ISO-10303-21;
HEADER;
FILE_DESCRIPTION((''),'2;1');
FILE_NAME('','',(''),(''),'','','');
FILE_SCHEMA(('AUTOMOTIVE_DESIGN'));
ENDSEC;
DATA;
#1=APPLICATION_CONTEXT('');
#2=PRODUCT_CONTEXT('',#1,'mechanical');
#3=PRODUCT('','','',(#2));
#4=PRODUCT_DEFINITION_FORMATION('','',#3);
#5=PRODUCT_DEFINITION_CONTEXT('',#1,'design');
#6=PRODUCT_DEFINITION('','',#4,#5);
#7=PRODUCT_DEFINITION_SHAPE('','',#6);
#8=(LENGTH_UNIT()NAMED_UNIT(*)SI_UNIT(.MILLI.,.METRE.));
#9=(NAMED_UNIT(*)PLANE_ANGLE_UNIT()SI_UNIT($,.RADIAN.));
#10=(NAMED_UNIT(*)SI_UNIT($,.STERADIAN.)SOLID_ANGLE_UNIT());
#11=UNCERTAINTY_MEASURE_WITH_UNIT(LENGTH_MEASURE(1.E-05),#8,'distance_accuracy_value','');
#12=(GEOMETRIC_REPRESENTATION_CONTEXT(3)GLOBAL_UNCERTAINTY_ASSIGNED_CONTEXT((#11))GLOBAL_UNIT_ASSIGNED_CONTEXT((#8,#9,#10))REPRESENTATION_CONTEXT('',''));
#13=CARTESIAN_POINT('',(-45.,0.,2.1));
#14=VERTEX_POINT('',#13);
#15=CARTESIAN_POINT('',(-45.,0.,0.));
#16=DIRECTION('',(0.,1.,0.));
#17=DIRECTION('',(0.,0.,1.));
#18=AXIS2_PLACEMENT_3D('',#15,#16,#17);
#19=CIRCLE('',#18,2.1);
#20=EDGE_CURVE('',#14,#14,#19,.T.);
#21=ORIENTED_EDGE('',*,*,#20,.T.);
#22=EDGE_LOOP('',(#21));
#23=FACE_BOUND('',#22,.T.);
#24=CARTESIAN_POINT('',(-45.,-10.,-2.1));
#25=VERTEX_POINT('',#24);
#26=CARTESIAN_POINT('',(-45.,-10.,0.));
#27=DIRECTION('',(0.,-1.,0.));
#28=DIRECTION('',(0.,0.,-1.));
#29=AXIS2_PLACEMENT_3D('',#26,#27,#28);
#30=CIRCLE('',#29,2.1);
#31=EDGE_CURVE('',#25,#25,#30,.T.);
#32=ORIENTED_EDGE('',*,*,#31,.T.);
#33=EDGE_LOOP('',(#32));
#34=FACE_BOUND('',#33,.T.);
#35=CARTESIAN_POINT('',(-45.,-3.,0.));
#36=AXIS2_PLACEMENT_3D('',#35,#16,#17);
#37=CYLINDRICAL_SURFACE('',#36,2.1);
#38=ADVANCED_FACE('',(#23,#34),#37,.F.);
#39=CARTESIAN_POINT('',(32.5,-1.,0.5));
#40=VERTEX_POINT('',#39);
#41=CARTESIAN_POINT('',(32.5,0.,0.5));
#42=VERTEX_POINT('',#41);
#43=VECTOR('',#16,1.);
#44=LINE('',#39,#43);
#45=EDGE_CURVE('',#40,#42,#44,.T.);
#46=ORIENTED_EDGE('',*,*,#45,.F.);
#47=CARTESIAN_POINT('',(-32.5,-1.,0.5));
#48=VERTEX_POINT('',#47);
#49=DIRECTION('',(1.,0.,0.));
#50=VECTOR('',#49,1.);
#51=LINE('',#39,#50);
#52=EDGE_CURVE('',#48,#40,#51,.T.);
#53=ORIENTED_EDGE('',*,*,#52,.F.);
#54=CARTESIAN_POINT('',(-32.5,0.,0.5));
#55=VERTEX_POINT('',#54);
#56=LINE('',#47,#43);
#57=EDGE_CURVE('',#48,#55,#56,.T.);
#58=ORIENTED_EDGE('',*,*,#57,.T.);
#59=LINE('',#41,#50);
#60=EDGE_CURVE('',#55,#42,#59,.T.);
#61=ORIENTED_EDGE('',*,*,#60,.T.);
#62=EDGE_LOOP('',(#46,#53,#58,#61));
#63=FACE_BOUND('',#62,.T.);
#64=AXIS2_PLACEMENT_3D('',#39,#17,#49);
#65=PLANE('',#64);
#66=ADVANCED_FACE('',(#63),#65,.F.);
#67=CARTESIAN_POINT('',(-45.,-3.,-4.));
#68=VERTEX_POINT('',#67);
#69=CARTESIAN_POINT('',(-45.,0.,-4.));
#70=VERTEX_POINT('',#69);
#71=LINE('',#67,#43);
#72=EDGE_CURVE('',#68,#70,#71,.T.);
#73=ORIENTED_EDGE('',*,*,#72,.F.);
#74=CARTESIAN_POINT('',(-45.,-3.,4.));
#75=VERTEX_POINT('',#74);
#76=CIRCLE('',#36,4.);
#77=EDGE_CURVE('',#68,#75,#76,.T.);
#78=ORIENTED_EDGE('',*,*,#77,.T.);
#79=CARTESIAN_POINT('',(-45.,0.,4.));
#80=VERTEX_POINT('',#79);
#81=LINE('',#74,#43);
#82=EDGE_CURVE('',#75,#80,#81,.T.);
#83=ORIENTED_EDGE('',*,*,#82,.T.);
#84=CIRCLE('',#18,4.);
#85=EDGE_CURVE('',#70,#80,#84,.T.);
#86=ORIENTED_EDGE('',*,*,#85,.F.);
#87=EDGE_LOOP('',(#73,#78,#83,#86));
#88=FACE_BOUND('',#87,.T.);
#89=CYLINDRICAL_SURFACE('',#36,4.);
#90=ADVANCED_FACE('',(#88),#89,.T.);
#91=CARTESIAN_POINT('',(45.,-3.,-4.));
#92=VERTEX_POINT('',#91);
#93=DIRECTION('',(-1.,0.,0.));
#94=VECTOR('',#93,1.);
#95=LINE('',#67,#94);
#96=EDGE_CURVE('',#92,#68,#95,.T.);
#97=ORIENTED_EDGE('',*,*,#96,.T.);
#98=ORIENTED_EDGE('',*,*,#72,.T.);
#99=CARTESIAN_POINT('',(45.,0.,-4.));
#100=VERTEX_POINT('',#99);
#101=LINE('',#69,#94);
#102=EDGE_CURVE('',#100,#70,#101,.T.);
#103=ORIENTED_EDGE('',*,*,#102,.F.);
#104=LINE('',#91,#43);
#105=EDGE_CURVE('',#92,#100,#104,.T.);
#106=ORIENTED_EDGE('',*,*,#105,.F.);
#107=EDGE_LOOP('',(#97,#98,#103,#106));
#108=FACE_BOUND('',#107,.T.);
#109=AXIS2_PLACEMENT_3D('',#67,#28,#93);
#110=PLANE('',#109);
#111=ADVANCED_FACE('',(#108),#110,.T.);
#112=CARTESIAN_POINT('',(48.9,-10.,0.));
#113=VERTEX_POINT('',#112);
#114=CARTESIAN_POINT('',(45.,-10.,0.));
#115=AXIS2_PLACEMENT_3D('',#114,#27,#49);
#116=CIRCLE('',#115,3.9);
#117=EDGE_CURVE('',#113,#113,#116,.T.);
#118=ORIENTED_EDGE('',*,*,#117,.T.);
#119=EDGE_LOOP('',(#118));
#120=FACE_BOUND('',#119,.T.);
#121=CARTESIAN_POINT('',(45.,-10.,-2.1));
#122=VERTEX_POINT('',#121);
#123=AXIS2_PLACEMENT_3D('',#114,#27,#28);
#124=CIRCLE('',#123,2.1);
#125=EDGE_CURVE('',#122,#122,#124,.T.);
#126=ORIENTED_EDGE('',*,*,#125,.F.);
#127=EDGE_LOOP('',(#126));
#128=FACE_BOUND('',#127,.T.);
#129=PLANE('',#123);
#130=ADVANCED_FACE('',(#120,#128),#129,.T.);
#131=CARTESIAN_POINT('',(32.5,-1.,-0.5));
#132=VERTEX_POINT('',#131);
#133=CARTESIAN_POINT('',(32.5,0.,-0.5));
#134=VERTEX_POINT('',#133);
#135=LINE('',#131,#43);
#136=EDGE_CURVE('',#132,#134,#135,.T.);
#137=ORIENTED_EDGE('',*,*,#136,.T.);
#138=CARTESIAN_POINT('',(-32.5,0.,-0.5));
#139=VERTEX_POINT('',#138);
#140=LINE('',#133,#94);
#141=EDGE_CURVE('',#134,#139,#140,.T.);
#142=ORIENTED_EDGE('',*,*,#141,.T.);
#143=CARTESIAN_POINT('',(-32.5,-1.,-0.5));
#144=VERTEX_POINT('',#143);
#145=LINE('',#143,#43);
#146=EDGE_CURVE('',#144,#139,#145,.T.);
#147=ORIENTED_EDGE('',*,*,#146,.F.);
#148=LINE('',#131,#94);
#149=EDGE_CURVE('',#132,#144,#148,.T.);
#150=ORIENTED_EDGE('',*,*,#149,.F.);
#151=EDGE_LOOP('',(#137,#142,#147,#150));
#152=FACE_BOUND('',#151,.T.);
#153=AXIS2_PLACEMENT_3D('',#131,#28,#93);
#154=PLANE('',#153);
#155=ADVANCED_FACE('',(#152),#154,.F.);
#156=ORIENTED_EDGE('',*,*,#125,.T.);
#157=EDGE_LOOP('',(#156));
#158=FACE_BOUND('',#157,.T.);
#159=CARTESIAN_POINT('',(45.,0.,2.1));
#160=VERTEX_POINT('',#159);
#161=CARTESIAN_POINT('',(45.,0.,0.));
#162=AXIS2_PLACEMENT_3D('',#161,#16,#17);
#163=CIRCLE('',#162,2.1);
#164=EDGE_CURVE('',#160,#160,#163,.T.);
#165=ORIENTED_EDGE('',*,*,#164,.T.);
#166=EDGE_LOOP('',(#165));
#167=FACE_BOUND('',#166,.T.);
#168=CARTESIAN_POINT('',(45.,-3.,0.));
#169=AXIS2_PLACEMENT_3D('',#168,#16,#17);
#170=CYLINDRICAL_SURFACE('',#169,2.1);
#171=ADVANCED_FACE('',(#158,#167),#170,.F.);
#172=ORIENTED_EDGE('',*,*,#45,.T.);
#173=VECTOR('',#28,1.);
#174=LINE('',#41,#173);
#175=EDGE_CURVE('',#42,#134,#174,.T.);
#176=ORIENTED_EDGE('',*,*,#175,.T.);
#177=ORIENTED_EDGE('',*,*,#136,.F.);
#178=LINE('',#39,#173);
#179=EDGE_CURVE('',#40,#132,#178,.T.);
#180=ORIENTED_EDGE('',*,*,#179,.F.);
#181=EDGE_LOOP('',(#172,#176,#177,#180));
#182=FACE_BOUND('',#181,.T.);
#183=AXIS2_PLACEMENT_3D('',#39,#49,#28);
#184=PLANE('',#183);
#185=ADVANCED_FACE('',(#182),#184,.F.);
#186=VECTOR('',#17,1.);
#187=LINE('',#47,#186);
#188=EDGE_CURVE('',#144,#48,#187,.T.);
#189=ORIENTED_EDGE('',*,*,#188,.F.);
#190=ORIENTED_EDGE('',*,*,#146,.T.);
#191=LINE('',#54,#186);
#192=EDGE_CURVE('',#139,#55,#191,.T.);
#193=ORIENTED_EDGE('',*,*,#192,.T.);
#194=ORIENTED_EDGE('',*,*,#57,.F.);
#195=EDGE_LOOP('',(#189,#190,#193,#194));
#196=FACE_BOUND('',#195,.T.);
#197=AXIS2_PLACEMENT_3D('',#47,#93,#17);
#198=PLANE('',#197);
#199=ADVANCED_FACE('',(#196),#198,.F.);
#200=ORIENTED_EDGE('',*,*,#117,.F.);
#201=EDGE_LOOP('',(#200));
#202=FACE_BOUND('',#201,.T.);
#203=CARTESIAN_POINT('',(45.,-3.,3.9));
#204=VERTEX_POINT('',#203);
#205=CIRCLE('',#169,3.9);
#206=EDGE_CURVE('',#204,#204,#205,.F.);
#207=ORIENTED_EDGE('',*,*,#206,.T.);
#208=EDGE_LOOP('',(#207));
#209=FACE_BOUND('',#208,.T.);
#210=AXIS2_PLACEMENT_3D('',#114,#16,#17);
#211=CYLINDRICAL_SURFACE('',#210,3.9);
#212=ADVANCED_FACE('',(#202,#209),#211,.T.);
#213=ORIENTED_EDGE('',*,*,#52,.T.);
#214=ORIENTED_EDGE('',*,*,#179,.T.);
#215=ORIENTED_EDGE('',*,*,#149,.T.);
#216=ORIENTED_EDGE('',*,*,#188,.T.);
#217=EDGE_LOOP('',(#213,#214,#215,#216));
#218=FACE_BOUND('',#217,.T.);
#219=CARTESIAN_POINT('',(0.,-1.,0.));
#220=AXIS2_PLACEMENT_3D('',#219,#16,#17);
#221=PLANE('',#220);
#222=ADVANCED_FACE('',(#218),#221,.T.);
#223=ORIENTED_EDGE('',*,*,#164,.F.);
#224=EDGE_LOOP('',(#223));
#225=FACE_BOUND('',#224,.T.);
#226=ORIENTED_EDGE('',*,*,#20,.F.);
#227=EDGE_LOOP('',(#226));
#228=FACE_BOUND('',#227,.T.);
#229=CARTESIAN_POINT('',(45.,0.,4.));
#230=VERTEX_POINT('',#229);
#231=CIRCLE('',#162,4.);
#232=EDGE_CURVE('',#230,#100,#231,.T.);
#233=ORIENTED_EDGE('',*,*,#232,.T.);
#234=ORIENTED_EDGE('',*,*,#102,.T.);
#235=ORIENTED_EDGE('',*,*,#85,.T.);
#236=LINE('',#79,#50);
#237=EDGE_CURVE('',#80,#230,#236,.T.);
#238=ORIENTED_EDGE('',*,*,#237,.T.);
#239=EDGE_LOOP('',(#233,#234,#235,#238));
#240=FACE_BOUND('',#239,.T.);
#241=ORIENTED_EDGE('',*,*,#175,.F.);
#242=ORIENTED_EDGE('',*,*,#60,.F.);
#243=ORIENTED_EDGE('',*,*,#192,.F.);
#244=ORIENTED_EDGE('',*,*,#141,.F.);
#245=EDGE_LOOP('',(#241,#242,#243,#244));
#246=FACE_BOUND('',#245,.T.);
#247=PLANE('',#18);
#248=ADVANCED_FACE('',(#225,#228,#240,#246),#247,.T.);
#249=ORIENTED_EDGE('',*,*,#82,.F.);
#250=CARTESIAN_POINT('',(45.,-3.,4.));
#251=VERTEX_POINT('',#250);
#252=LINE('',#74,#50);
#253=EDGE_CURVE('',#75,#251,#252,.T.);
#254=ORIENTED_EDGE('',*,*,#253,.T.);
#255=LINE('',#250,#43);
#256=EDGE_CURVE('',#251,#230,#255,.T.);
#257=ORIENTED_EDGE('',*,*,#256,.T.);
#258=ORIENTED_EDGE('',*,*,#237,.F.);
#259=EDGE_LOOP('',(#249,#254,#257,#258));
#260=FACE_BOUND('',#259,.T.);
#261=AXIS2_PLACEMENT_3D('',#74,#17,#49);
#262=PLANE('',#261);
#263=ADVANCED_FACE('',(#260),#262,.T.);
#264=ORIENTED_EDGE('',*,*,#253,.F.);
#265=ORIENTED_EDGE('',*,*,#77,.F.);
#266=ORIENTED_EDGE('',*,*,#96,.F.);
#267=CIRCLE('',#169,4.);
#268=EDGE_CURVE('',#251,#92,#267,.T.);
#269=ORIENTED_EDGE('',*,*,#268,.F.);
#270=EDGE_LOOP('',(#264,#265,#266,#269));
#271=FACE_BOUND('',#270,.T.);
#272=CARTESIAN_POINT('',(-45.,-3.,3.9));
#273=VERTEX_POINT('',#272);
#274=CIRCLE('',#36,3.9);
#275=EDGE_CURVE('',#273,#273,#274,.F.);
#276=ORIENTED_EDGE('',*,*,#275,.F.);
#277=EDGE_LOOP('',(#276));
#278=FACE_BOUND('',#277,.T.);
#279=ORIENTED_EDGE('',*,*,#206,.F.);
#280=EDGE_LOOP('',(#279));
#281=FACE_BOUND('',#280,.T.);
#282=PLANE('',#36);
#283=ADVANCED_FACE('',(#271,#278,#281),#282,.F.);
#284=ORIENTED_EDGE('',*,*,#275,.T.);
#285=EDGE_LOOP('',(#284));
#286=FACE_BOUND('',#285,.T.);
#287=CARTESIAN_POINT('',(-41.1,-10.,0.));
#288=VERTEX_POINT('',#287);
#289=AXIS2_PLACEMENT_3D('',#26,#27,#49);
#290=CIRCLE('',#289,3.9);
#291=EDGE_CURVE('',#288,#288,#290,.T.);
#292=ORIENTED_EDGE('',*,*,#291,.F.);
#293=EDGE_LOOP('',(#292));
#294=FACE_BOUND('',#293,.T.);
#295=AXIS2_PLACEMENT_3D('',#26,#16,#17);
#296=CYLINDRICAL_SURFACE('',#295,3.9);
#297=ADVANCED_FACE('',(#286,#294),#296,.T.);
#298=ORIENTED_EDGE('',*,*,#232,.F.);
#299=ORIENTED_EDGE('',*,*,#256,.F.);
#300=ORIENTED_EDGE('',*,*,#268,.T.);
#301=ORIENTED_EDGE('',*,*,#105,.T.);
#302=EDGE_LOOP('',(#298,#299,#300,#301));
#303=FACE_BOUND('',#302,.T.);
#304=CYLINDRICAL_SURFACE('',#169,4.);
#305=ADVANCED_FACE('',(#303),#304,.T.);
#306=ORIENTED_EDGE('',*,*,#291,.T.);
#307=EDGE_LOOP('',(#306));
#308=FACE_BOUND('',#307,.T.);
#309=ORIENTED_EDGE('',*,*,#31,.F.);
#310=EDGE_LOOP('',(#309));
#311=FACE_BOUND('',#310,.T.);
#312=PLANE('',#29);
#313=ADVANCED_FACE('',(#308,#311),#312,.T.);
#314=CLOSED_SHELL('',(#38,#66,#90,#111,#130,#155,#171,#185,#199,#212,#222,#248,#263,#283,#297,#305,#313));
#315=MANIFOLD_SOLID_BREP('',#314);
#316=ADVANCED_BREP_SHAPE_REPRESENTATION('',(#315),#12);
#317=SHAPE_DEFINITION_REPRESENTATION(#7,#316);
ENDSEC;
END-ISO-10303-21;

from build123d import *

# Parameters (mm, degrees)
SKETCH1_R           = 2.1
BOSS_EXTRUDE1_DEPTH = 3
SKETCH2_R           = 3.9
SKETCH2_R_2         = 2.1
EXTRUDE_THIN1_DEPTH = 7
SKETCH3_W           = 65
SKETCH3_H           = 1
CUT_EXTRUDE1_DEPTH  = 1


with BuildPart() as part:
    # Sketch1 → Boss-Extrude1 (new body)
    with BuildSketch(Plane(origin=(0, 0, 0), x_dir=(1, 0, 0), z_dir=(0, 1, 0))):
        with BuildLine():
            Line((-45, 4), (45, 4))
            ThreePointArc((45, 4), (49, 0), (45, -4))
            Line((45, -4), (-45, -4))
            ThreePointArc((-45, -4), (-49, 0), (-45, 4))
        make_face()
        with Locations((-45, 0)):
            Circle(SKETCH1_R, mode=Mode.SUBTRACT)
        with Locations((45, 0)):
            Circle(SKETCH1_R, mode=Mode.SUBTRACT)
    extrude(amount=-BOSS_EXTRUDE1_DEPTH)

    # Sketch2 → Extrude-Thin1 (add)
    # profile 1 of 2: a face of its own
    with BuildSketch(Plane.XZ.offset(3)):
        with Locations((45, 0)):
            Circle(SKETCH2_R)
        with Locations((45, 0)):
            Circle(SKETCH2_R_2, mode=Mode.SUBTRACT)
    # profile 2 of 2: a face of its own
    with BuildSketch(Plane.XZ.offset(3)):
        with Locations((-45, 0)):
            Circle(SKETCH2_R)
        with Locations((-45, 0)):
            Circle(SKETCH2_R_2, mode=Mode.SUBTRACT)
    extrude(amount=EXTRUDE_THIN1_DEPTH)

    # Sketch3 → Cut-Extrude1 (cut)
    with BuildSketch(Plane(origin=(0, 0, 0), x_dir=(1, 0, 0), z_dir=(0, 1, 0))):
        Rectangle(SKETCH3_W, SKETCH3_H)
    extrude(amount=-CUT_EXTRUDE1_DEPTH, mode=Mode.SUBTRACT)


solid = part.part
